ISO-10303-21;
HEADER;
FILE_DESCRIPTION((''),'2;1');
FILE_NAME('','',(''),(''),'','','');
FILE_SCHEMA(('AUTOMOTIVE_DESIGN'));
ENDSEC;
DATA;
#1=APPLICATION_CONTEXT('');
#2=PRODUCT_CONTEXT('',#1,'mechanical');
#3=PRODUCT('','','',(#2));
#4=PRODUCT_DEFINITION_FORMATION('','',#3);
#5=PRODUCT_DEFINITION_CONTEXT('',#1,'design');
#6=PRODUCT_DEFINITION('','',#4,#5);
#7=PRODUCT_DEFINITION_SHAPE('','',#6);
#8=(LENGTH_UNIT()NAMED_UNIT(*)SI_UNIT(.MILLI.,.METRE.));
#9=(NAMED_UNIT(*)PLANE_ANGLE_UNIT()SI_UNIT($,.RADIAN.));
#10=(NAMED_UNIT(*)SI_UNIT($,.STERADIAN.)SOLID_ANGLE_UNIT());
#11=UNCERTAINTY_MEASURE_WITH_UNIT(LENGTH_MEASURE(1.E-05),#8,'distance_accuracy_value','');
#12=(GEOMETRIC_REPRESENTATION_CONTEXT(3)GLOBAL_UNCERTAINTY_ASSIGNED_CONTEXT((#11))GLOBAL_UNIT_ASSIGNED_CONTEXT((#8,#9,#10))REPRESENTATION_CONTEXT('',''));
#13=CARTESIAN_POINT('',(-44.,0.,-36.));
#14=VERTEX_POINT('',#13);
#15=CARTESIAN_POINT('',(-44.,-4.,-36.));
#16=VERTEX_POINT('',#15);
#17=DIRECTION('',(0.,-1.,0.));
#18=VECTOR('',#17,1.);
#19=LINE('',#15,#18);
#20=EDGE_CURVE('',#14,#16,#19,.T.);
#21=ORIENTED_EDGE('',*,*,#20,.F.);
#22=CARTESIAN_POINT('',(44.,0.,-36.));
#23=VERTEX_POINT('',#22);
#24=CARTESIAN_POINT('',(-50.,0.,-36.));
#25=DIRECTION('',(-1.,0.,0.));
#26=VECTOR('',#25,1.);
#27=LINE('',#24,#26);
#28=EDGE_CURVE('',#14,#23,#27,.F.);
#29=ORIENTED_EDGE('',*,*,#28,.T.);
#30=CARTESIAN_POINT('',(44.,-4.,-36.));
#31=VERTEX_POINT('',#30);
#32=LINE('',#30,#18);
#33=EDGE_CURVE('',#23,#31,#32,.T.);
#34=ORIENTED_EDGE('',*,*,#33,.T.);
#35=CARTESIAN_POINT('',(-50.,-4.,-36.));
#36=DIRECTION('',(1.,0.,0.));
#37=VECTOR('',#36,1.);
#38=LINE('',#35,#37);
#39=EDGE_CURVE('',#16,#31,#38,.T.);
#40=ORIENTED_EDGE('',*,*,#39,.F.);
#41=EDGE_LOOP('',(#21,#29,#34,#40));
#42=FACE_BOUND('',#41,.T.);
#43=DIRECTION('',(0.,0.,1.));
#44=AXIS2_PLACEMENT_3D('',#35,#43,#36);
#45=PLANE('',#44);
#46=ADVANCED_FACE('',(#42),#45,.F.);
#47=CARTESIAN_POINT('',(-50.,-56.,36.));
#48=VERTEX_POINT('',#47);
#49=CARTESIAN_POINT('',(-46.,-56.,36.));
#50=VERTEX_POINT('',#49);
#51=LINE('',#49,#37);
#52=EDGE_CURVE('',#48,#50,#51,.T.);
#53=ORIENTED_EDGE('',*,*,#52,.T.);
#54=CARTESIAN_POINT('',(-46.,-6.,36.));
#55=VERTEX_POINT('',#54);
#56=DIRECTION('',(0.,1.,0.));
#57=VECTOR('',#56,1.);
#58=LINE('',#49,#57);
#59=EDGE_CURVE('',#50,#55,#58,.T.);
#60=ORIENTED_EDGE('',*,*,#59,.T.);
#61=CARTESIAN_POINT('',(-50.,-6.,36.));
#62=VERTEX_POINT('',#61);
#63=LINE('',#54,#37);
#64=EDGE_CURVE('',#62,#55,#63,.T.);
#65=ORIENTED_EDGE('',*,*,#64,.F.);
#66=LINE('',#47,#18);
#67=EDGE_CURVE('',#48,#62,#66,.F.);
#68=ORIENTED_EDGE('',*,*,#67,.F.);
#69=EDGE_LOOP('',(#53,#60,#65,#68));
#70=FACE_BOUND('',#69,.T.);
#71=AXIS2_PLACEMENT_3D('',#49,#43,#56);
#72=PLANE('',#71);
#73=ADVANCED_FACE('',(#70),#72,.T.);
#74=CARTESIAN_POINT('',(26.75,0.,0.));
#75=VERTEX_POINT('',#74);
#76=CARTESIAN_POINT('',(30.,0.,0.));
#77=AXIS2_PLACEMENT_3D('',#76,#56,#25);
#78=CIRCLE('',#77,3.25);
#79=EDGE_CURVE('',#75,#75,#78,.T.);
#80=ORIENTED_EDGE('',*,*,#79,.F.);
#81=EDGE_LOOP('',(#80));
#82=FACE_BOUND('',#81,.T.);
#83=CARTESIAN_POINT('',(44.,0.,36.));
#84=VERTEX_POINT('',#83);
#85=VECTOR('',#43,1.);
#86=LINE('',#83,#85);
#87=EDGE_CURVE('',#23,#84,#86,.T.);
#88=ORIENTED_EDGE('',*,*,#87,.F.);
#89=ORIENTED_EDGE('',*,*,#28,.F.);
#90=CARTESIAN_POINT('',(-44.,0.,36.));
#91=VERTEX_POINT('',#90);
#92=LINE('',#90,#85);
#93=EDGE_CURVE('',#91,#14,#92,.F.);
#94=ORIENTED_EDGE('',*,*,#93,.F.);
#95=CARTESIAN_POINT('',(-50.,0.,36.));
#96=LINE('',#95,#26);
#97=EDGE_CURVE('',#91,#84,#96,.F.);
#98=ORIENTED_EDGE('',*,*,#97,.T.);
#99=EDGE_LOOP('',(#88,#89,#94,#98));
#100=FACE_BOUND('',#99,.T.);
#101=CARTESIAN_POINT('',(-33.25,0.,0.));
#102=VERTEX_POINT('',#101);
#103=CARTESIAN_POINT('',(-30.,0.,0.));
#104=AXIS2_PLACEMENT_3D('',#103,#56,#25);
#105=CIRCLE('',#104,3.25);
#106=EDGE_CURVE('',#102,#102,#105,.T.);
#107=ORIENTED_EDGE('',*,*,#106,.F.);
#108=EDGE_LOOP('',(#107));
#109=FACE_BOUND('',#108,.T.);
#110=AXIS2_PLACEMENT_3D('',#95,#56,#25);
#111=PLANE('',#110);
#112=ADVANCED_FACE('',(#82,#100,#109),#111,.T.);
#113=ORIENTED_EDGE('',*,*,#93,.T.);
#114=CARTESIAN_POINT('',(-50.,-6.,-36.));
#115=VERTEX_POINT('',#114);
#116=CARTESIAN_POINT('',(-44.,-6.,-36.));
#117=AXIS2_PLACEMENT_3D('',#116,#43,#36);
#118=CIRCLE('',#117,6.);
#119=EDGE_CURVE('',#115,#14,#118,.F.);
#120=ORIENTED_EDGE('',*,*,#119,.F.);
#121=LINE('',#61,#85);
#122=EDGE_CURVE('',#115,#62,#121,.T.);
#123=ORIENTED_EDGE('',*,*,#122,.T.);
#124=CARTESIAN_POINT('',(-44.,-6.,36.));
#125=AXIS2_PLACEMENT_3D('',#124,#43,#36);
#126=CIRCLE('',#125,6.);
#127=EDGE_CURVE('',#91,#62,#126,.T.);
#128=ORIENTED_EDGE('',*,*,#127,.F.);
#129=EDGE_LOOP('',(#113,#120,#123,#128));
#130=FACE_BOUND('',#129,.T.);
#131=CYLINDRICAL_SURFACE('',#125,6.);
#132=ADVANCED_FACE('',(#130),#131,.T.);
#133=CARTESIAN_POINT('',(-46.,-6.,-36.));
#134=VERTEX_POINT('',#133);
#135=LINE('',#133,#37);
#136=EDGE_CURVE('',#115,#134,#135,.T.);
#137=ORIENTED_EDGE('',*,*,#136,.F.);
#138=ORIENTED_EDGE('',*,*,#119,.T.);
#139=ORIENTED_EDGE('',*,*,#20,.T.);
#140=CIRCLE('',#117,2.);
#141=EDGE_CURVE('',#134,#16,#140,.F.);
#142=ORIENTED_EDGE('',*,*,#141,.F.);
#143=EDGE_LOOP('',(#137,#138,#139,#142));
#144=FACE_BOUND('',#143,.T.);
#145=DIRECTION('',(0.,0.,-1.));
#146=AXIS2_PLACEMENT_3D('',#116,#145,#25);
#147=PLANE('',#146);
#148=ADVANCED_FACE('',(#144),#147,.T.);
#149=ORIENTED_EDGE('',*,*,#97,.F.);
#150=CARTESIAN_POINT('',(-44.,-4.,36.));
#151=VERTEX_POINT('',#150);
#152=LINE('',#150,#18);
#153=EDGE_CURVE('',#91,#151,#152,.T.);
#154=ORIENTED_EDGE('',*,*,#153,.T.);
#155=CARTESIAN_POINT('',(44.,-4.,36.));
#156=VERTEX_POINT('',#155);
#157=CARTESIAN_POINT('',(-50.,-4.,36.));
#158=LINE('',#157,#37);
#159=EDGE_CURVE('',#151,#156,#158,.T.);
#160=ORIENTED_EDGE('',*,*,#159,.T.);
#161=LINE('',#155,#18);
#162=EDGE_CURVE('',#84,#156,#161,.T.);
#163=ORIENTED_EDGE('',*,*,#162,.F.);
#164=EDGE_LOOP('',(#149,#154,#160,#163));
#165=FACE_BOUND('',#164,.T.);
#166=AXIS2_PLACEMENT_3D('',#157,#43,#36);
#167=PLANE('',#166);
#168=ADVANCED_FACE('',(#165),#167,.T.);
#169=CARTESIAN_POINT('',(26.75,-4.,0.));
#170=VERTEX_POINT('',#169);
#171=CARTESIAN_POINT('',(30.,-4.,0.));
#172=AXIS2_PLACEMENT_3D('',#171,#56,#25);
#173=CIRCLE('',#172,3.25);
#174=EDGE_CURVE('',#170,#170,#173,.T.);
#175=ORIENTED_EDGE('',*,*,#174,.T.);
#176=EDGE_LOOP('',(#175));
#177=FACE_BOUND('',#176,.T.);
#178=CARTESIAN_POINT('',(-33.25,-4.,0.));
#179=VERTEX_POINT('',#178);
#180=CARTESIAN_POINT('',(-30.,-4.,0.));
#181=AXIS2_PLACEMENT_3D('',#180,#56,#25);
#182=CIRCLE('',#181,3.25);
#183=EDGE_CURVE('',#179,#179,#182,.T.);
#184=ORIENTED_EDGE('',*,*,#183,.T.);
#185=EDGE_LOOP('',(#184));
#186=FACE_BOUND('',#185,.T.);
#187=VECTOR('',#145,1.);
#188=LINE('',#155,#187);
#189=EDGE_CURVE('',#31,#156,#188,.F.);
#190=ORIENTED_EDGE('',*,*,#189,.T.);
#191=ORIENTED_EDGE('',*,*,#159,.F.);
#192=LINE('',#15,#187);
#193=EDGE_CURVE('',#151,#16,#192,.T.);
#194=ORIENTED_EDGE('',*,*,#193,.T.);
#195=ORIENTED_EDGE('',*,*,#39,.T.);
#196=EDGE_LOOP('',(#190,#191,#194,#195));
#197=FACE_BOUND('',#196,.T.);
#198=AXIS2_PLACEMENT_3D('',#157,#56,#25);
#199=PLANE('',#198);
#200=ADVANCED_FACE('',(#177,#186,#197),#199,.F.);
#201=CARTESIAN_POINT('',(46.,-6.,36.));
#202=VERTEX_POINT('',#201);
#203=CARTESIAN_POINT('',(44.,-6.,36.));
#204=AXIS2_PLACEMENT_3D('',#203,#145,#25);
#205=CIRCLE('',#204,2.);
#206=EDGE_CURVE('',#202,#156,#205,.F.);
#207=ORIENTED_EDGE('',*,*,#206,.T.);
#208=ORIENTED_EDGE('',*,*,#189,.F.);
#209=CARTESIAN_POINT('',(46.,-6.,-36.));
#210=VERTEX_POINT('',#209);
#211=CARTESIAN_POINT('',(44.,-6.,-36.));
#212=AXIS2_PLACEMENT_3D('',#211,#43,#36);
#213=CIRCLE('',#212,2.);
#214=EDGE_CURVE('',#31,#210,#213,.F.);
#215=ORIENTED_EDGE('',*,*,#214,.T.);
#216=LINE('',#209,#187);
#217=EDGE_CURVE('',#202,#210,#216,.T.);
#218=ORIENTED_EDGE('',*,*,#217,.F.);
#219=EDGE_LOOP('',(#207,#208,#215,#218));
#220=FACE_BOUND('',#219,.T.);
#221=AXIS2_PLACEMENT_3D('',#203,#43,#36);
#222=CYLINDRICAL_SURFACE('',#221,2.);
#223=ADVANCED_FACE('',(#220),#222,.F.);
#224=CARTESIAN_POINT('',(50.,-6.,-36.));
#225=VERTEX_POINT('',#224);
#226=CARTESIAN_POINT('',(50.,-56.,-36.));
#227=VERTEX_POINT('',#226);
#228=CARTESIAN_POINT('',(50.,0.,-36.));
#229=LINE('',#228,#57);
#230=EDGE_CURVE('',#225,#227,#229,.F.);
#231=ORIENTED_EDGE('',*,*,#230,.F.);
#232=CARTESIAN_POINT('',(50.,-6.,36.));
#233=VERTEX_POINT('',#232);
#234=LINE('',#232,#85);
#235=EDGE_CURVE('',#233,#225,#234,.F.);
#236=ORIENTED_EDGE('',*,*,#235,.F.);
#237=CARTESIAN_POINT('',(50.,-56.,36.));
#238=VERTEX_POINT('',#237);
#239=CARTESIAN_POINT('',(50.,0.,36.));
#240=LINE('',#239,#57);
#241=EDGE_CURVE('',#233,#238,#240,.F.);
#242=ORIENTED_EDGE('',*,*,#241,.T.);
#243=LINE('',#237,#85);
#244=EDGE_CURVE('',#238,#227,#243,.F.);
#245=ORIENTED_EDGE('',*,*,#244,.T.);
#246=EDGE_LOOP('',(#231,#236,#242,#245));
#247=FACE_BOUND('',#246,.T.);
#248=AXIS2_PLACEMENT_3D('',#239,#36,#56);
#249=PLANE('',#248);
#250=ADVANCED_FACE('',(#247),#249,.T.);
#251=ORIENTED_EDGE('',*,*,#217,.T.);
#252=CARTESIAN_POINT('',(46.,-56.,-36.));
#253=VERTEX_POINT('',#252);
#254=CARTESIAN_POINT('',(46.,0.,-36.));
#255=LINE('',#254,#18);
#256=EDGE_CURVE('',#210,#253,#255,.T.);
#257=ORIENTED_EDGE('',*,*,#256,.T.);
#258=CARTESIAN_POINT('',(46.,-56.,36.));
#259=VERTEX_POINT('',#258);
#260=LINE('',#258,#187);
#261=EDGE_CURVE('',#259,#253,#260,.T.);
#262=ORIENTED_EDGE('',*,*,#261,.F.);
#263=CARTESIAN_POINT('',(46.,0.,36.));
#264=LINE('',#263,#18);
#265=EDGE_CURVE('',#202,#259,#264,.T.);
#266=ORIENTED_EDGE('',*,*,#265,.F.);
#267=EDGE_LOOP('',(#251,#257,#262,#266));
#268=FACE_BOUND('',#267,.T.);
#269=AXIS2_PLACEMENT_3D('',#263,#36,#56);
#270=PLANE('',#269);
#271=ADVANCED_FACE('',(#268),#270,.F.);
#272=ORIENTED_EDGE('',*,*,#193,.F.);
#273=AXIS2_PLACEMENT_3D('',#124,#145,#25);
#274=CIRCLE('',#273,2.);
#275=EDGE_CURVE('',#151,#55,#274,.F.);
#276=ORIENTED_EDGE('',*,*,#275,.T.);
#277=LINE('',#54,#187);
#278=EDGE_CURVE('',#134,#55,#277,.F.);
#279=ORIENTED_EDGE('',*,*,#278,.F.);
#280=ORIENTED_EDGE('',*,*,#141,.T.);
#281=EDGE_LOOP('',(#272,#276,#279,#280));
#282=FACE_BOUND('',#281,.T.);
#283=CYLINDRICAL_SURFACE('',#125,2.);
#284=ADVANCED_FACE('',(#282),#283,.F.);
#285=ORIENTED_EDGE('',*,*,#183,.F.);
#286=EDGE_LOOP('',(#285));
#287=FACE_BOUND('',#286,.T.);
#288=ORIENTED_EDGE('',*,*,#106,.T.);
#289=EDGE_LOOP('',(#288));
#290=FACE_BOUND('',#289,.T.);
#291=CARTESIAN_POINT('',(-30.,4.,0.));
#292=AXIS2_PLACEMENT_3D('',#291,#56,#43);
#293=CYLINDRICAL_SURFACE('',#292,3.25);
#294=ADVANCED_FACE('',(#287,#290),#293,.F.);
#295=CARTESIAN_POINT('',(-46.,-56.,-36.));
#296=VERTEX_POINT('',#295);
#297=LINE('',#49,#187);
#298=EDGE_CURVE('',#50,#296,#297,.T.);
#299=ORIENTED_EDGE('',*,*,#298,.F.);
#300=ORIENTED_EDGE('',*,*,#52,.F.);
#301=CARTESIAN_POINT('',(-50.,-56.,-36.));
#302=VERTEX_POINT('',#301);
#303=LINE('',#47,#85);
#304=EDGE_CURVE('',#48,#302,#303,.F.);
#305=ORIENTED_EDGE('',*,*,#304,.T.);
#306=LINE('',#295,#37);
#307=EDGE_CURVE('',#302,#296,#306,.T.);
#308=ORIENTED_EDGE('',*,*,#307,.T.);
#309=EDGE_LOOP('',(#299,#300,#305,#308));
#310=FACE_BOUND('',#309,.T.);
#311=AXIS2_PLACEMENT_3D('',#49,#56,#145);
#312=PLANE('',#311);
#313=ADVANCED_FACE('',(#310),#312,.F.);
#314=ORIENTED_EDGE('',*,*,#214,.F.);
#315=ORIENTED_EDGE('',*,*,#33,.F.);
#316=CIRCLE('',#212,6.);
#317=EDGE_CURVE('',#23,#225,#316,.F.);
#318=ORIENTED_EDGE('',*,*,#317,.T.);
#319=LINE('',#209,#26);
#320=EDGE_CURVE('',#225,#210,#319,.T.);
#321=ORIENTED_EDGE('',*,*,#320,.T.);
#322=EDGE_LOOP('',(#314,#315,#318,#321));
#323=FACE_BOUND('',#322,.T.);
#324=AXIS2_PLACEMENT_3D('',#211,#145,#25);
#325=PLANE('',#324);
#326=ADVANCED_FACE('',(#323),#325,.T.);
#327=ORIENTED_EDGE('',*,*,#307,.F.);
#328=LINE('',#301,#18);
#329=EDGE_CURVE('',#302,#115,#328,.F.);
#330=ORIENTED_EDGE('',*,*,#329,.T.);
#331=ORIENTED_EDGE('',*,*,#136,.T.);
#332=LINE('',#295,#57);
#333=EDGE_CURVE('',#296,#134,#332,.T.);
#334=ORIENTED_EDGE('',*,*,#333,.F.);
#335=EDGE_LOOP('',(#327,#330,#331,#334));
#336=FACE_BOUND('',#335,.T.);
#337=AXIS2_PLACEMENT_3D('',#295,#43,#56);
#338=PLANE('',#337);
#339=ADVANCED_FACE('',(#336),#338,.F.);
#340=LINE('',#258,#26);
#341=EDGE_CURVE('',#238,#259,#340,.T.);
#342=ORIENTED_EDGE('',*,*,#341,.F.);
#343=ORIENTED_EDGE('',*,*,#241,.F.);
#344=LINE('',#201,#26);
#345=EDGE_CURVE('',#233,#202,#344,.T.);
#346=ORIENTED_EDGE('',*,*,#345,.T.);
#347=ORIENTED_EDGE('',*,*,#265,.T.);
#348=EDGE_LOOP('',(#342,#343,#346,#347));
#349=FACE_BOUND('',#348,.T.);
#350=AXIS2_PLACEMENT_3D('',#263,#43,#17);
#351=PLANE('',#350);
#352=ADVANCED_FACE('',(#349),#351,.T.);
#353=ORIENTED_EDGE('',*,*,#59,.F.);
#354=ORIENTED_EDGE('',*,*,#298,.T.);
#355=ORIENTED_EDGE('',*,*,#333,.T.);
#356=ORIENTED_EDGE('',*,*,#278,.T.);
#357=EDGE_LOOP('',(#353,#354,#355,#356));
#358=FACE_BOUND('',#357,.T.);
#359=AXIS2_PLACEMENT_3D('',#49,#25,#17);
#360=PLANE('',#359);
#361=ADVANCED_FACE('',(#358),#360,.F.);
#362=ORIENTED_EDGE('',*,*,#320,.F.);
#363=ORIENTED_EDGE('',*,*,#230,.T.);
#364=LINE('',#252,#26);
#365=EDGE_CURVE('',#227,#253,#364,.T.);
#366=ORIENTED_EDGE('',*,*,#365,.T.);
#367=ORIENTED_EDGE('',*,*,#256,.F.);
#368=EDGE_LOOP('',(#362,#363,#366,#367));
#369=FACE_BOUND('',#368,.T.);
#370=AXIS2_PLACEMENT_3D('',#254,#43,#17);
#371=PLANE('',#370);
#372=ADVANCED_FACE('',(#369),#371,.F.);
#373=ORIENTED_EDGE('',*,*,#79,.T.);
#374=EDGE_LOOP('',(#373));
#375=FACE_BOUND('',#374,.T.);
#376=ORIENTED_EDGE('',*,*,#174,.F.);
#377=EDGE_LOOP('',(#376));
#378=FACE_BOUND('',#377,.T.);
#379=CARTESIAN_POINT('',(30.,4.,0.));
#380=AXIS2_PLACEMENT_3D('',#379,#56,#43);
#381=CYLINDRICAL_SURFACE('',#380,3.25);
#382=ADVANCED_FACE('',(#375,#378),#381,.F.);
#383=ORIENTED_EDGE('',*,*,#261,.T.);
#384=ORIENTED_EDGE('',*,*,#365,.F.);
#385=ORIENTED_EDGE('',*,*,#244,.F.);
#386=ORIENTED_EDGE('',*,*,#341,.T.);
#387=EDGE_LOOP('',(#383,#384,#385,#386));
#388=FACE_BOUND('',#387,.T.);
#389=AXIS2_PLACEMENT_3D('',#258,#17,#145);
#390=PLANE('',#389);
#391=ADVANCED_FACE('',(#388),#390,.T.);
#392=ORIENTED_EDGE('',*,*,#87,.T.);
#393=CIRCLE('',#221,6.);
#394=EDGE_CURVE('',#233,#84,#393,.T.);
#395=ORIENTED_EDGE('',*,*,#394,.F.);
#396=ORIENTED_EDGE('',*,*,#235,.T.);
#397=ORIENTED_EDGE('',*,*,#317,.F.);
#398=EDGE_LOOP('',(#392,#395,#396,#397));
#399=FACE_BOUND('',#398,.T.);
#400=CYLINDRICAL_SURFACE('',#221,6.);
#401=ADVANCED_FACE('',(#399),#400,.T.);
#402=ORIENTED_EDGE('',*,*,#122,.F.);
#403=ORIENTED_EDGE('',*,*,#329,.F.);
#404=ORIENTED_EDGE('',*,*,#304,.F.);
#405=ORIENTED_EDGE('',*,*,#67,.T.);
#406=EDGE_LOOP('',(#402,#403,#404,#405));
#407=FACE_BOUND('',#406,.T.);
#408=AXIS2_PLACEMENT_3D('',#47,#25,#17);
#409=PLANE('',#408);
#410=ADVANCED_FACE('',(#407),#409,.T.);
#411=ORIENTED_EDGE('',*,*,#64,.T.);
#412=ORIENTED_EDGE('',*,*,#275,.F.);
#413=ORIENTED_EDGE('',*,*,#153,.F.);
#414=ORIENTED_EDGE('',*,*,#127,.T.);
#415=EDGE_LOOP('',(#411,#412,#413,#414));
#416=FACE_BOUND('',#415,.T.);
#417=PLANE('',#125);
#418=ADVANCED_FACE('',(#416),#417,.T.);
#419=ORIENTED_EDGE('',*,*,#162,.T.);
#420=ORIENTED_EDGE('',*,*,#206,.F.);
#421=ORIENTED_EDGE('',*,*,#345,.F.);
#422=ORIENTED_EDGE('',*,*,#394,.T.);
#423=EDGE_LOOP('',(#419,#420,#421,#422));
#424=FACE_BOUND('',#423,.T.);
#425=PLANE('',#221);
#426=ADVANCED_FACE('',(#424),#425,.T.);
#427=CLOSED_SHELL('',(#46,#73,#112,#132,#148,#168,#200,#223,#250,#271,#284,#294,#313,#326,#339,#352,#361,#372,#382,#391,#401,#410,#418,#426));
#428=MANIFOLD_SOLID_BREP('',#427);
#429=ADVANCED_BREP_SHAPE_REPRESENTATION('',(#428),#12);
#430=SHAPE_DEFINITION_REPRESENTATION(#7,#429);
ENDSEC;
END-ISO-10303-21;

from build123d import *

# Parameters (mm, degrees)
EXTRUDE_THIN1_DEPTH        = 36
CONVERT_SOLID1_START       = -36
CONVERT_SOLID1_DEPTH       = 72
CONVERT_SOLID1_2_DEPTH     = 72
F_6_5_6_5_DIAMETER_HOLE1_D = 6.5
F_6_5_6_5_DIAMETER_HOLE2_D = 6.5


# Read off the part's stored shape, not the designer's step: Convert-Solid1
with BuildPart() as part:
    # Sketch1 → Extrude-Thin1 (new, symmetric)
    with BuildSketch(Plane.XY):
        Polygon((-50, -56), (-50, 0), (50, 0), (50, -56), (46, -56), (46, -4), (-46, -4), (-46, -56), align=None)
    extrude(amount=EXTRUDE_THIN1_DEPTH, both=True)

    # Convert-Solid1 outline → Convert-Solid1 (cut)
    with BuildSketch(Plane.XY.offset(CONVERT_SOLID1_START)):
        with BuildLine():
            Line((50, 0), (44, 0))
            ThreePointArc((44, 0), (48.242640687, -1.757359313), (50, -6))
            Line((50, -6), (50, 0))
        make_face()
        with BuildLine():
            ThreePointArc((-50, -6), (-48.242640687, -1.757359313), (-44, 0))
            Line((-44, 0), (-50, 0))
            Line((-50, 0), (-50, -6))
        make_face()
    extrude(amount=CONVERT_SOLID1_DEPTH, mode=Mode.SUBTRACT)

    # Convert-Solid1 2 outline → Convert-Solid1 2 (add)
    with BuildSketch(Plane.XY.offset(CONVERT_SOLID1_START)):
        with BuildLine():
            Line((46, -4), (44, -4))
            ThreePointArc((44, -4), (45.414213562, -4.585786438), (46, -6))
            Line((46, -6), (46, -4))
        make_face()
        with BuildLine():
            ThreePointArc((-46, -6), (-45.414213562, -4.585786438), (-44, -4))
            Line((-44, -4), (-46, -4))
            Line((-46, -4), (-46, -6))
        make_face()
    extrude(amount=CONVERT_SOLID1_2_DEPTH)

    # Ø6.5 (6.5) Diameter Hole1 (through all)
    with Locations(Plane(origin=(-92.5, 4, 244.5), x_dir=(1, 0, 0), z_dir=(0, 1, 0))):
        with Locations((-122.5, 244.5), (-62.5, 244.5), (62.5, 244.5), (122.5, 244.5)):
            Hole(F_6_5_6_5_DIAMETER_HOLE1_D / 2)

    # Ø6.5 (6.5) Diameter Hole2 (through all)
    with Locations(Plane(origin=(92.5, 4, 244.5), x_dir=(1, 0, 0), z_dir=(0, 1, 0))):
        with Locations((-122.5, 244.5), (-62.5, 244.5), (62.5, 244.5), (122.5, 244.5)):
            Hole(F_6_5_6_5_DIAMETER_HOLE2_D / 2)


solid = part.part
